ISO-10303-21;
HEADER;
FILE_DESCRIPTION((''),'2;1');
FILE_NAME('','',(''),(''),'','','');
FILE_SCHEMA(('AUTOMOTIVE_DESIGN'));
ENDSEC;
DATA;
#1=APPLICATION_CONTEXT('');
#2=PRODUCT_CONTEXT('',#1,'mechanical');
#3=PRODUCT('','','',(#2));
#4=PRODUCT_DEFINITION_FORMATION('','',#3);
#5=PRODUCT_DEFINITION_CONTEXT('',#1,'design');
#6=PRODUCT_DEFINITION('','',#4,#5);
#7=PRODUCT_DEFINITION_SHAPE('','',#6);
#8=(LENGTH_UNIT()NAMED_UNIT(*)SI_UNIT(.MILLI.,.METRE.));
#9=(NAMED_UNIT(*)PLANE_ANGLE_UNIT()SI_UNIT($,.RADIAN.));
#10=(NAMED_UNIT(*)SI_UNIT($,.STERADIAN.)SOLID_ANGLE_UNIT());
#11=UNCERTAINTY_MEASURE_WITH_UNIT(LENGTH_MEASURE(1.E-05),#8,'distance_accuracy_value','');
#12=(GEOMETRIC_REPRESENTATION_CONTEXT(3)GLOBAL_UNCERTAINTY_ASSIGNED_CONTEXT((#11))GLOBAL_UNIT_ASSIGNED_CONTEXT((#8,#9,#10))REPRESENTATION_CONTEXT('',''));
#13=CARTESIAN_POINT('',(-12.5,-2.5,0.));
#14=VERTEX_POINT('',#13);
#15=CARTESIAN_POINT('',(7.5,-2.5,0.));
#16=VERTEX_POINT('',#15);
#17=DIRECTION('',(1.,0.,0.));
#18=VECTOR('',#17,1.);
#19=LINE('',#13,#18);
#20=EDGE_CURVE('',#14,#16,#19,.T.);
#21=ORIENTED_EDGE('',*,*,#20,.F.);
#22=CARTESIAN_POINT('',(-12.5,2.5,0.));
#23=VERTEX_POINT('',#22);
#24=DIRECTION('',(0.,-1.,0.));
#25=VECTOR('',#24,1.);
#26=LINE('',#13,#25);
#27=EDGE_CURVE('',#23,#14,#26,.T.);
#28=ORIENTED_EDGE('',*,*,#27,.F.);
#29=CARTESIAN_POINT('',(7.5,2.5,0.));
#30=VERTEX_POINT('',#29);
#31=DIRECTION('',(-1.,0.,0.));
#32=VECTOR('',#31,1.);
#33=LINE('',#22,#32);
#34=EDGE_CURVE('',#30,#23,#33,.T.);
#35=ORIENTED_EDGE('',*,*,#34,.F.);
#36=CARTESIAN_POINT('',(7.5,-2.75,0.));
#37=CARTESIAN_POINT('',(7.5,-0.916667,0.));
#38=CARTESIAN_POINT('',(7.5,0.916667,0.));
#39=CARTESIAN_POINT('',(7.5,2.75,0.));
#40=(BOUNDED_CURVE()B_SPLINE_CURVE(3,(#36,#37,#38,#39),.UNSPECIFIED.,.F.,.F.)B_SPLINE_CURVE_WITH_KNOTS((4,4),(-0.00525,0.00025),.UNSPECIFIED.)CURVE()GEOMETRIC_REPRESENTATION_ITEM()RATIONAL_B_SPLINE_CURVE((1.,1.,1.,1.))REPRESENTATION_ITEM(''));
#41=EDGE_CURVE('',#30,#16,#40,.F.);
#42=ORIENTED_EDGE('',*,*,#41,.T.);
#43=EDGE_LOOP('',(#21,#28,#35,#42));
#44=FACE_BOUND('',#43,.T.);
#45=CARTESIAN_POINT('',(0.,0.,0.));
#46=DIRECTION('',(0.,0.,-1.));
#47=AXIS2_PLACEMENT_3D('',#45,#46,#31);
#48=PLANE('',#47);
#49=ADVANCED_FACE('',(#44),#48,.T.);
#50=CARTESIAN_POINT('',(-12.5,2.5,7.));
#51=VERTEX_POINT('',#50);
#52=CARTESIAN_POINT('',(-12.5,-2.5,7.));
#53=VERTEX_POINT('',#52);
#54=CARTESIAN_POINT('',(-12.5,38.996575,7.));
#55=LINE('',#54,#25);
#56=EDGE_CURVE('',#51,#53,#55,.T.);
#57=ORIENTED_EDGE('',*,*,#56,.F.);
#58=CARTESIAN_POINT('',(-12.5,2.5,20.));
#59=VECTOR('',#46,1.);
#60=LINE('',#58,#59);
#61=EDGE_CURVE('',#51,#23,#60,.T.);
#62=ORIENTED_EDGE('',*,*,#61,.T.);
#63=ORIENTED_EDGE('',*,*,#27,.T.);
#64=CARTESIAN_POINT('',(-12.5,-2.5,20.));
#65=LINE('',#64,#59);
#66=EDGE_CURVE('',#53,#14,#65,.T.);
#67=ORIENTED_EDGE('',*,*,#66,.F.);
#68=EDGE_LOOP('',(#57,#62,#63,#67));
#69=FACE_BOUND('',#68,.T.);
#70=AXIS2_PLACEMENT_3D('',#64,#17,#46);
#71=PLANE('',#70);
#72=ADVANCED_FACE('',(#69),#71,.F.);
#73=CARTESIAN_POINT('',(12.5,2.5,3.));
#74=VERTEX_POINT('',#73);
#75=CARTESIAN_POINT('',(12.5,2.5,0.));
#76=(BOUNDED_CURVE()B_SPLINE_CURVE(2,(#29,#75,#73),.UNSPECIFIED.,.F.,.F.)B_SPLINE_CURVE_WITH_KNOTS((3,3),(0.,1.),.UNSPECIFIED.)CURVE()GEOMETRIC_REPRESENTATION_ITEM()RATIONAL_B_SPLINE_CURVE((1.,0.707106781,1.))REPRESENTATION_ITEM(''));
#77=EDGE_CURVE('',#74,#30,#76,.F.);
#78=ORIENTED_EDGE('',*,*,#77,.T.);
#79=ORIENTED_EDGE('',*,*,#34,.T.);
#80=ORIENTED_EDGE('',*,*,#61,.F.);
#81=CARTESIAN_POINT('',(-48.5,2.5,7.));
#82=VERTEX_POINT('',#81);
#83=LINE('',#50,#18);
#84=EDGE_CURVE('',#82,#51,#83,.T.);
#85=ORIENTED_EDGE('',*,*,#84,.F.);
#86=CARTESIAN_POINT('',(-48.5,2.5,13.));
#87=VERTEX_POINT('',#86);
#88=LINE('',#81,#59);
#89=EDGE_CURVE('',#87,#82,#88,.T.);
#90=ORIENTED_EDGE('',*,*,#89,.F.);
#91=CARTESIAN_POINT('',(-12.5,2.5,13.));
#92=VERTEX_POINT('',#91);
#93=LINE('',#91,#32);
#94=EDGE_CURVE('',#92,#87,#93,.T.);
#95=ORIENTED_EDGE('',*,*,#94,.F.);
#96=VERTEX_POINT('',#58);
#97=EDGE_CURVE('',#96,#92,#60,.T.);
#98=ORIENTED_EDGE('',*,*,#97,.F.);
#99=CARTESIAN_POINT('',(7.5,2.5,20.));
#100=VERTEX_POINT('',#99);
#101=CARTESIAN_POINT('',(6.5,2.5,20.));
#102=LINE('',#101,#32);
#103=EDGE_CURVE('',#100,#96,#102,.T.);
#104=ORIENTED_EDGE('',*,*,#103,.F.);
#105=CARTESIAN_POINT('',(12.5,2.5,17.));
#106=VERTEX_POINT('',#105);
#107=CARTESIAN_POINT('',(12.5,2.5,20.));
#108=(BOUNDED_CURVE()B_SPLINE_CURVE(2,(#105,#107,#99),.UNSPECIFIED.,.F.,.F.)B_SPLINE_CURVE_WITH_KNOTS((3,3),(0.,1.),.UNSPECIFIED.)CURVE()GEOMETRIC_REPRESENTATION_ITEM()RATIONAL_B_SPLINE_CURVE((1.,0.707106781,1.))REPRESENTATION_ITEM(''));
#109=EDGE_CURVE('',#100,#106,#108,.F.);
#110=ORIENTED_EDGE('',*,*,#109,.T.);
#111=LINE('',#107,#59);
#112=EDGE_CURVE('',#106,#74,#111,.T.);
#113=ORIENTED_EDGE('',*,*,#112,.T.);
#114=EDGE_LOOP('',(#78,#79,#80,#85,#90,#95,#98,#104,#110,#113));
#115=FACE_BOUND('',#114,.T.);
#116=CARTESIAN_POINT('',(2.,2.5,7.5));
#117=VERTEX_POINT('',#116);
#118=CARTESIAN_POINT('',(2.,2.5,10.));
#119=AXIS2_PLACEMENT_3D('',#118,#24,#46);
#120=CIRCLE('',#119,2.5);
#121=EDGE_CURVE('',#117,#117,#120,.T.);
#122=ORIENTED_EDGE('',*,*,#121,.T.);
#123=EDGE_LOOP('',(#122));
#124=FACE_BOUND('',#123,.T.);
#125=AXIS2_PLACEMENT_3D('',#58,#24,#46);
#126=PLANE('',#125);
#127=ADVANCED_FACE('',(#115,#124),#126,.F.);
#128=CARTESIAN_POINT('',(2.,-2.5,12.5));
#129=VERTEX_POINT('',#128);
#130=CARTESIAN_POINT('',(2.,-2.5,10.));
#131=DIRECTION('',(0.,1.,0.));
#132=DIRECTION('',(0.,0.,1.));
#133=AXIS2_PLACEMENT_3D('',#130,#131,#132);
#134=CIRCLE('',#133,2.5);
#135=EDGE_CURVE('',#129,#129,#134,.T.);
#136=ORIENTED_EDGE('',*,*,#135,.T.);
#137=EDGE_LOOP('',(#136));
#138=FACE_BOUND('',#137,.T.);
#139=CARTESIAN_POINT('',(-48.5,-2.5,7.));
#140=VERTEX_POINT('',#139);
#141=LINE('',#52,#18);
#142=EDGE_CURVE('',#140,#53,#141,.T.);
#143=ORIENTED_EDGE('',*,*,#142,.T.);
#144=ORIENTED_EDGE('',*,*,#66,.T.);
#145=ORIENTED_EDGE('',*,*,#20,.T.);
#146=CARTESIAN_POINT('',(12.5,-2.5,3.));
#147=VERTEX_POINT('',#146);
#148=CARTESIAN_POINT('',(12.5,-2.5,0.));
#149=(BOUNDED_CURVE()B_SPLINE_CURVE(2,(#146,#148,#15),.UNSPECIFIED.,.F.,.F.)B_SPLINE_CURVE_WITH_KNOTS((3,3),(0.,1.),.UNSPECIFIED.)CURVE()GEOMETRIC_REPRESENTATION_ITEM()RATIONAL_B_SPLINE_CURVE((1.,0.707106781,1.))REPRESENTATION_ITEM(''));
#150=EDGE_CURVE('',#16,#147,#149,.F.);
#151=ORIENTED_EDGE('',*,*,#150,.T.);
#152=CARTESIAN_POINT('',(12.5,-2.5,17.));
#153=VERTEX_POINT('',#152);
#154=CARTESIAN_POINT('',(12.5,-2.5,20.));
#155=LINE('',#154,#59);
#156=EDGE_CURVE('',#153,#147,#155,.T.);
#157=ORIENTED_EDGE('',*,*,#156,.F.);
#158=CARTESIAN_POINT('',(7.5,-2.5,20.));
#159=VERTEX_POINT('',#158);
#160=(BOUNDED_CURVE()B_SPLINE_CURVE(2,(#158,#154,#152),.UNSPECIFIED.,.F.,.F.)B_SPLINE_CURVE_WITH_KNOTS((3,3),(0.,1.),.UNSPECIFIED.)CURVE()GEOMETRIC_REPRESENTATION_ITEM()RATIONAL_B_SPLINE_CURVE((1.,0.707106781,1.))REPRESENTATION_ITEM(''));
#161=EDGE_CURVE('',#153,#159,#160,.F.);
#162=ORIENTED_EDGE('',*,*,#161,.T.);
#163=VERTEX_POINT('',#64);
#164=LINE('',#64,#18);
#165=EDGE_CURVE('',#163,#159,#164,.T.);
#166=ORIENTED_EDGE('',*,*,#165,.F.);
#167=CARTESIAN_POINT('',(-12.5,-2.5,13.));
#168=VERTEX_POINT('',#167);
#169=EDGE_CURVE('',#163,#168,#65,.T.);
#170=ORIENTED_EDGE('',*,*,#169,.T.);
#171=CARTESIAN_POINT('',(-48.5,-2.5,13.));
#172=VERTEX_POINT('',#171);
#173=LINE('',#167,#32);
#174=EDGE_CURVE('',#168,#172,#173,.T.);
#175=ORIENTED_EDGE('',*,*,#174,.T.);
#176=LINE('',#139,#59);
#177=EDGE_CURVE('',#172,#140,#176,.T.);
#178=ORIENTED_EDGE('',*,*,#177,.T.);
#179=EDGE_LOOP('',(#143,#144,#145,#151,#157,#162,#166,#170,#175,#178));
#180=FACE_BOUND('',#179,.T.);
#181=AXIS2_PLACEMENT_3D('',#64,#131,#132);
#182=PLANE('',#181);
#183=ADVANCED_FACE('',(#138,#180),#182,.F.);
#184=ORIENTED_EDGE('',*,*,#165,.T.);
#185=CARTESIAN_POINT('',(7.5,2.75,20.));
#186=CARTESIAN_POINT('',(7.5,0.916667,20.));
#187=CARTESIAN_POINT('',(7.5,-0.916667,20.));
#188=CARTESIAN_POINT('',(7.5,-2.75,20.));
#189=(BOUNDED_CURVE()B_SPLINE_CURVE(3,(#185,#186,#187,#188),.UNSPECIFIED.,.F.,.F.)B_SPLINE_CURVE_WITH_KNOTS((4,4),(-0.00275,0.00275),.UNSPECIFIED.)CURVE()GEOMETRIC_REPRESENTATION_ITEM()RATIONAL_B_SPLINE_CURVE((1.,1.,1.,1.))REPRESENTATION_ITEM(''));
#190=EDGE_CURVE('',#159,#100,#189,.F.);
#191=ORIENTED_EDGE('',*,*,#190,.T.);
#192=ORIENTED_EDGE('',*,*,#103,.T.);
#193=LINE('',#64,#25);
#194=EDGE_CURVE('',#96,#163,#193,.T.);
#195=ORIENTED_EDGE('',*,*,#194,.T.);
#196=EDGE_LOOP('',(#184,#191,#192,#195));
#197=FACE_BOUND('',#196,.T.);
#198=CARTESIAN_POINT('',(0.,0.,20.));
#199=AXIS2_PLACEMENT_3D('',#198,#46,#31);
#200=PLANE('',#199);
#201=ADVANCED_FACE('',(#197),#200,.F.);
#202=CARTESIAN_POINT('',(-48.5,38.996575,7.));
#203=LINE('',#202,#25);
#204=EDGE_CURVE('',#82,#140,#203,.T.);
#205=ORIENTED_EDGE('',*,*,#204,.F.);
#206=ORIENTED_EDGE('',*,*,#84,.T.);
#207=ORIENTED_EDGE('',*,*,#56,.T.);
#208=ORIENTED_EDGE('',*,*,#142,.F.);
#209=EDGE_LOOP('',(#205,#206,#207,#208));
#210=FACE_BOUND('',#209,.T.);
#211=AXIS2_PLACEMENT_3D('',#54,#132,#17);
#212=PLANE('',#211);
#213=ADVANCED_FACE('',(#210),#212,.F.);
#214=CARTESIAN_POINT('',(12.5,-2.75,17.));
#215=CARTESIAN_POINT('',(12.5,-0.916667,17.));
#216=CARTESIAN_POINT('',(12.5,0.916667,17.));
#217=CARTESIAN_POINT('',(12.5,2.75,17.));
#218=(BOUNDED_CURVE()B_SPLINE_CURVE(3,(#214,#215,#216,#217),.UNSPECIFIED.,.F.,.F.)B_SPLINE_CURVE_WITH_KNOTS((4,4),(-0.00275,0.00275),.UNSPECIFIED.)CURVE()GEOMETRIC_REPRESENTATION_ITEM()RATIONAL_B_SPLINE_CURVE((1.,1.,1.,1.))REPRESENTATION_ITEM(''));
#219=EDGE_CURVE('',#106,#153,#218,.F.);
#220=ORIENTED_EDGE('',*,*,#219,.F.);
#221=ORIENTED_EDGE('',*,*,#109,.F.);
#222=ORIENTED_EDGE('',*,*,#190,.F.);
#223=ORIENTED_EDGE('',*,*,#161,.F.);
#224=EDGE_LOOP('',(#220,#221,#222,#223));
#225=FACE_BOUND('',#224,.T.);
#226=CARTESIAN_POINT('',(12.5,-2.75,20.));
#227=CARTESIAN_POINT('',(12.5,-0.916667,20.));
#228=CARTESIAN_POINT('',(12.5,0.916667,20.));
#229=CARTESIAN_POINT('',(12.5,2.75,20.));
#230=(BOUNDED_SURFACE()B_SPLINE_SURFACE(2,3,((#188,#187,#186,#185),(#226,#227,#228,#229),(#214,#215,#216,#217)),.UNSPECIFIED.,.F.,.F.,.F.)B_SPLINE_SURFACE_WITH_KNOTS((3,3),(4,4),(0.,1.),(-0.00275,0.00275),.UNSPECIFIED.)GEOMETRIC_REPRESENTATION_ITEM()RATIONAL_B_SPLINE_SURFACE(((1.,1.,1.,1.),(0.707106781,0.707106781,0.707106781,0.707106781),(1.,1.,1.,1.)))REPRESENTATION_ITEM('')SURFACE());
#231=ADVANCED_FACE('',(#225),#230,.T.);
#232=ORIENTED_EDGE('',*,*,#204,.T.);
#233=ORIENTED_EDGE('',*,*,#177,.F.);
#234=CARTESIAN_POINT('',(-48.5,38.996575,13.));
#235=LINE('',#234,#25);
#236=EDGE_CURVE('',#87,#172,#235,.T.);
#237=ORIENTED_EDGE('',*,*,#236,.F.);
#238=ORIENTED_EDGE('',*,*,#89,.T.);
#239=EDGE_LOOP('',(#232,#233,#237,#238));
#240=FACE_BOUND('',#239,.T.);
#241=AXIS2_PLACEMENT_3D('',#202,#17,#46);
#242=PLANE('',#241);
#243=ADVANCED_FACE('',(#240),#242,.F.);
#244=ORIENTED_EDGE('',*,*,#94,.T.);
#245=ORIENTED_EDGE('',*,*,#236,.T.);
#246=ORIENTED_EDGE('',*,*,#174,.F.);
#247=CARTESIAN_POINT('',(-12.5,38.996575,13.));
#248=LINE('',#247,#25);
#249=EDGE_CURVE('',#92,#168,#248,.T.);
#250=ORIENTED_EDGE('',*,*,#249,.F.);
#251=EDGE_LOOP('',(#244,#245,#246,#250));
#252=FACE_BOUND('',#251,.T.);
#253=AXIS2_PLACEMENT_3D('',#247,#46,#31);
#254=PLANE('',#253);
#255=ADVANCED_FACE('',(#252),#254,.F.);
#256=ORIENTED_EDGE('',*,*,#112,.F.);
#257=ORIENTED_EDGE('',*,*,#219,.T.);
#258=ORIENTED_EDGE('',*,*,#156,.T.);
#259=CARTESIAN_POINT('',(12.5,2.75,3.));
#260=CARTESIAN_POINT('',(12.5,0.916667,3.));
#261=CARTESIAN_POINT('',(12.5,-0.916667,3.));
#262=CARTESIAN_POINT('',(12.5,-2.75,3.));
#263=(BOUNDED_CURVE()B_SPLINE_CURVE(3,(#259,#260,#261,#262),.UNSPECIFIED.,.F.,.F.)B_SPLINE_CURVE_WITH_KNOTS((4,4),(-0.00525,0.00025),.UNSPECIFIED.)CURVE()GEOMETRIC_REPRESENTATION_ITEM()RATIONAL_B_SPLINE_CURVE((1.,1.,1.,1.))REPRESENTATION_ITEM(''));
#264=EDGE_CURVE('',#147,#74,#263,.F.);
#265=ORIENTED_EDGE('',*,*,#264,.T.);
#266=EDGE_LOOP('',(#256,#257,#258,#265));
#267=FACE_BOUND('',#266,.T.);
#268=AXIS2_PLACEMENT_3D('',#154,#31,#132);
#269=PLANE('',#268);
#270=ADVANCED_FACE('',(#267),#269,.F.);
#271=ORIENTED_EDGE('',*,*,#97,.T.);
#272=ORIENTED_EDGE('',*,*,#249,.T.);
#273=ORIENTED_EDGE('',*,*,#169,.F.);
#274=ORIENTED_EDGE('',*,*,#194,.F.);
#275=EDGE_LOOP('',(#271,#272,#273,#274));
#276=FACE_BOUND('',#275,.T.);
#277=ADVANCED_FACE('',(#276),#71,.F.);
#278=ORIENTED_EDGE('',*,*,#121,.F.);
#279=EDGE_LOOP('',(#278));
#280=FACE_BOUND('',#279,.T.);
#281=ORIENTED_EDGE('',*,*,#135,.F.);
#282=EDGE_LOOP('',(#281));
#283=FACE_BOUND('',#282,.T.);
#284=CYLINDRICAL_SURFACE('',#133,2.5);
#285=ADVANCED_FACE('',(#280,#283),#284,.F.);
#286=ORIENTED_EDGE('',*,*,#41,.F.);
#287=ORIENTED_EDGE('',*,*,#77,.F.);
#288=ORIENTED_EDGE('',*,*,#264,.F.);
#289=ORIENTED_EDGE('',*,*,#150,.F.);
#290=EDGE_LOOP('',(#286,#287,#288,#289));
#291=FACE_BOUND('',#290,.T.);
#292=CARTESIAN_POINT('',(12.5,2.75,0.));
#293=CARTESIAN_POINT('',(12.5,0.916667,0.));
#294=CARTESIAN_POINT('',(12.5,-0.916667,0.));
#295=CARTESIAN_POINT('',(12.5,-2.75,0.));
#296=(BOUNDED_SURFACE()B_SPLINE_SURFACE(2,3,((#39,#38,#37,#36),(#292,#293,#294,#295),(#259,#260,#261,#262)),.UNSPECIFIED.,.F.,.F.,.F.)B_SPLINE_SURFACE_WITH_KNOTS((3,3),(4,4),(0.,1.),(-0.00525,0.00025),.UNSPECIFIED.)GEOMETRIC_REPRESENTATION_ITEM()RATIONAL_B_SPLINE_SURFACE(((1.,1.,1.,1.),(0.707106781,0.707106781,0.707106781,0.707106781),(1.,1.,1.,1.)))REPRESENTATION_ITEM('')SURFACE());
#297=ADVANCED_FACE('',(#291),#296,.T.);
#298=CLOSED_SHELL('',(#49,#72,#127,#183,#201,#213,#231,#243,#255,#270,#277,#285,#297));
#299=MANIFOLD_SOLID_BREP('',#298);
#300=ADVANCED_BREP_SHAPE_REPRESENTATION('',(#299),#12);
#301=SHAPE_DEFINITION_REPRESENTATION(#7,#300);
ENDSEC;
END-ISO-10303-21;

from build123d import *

# Parameters (mm, degrees)
BOSS_EXTRUDE1_DEPTH             = 20
CUT_EXTRUDE2_DEPTH              = 25.109126902
CUT_EXTRUDE2_DEPTH_BACK         = 25.109126902
SKETCH2_R                       = 2.5
FILLET1_SIZE                    = 3
FILLET1_SIZE_2                  = 5
BOSS_EXTRUDE2_REACH             = 25.717
SKETCH3_W                       = 36
SKETCH3_H                       = 6
BOSS_EXTRUDE2_DIRECTION_2_REACH = 25.717


with BuildPart() as part:
    # Sketch1 → Boss-Extrude1 (new body)
    with BuildSketch(Plane.XY):
        Polygon((6.5, 2.5), (12.5, 2.5), (12.5, -2.5), (-12.5, -2.5), (-12.5, 2.5), align=None)
    extrude(amount=BOSS_EXTRUDE1_DEPTH)

    # Sketch2 → Cut-Extrude2 (cut, two sides: drawn at the far end of the back side and taken through both)
    with BuildSketch(Plane(origin=(0, 2.5, 0), x_dir=(1, 0, 0), z_dir=(0, 1, 0)).offset(-CUT_EXTRUDE2_DEPTH_BACK)):
        with Locations(Location((2, -10, 0), (0, 0, 270))):
            Circle(SKETCH2_R)
    extrude(amount=CUT_EXTRUDE2_DEPTH + CUT_EXTRUDE2_DEPTH_BACK, mode=Mode.SUBTRACT)

    # Fillet1
    # an asymmetric fillet: 5, 3 mm, written as the material it takes off along each edge
    with BuildSketch(Plane(origin=(12.5, 15, 20), x_dir=(0, 0, -1), z_dir=(0, -1, 0))) as fillet1_piece_1:
        with BuildLine():
            Bezier((FILLET1_SIZE, 0), (0, 0), (0, -FILLET1_SIZE_2), weights=[1, 0.707106781, 1])
            Line((0, -FILLET1_SIZE_2), (0, 0))
            Line((0, 0), (FILLET1_SIZE, 0))
        make_face()
    extrude(amount=30, mode=Mode.SUBTRACT)
    with BuildSketch(Plane(origin=(12.5, 15, 0), x_dir=(0, 0, 1), z_dir=(0, -1, 0))) as fillet1_piece_2:
        with BuildLine():
            Bezier((FILLET1_SIZE, 0), (0, 0), (0, FILLET1_SIZE_2), weights=[1, 0.707106781, 1])
            Line((0, FILLET1_SIZE_2), (0, 0))
            Line((0, 0), (FILLET1_SIZE, 0))
        make_face()
    extrude(amount=30, mode=Mode.SUBTRACT)

    # Boss-Extrude2: up to this face of the body (flat: up to its plane)
    boss_extrude2_end = Plane(part.part.faces().sort_by_distance((12.179843785, 2.5, 10))[0])
    # Sketch3 → Boss-Extrude2 (add, up to the picked face)
    with BuildSketch(Plane(origin=(0, 0, 0), x_dir=(1, 0, 0), z_dir=(0, 1, 0)), mode=Mode.PRIVATE) as boss_extrude2_sk1:
        with Locations((-30.5, -10)):
            Rectangle(SKETCH3_W, SKETCH3_H)
    boss_extrude2_tool1 = split(extrude(boss_extrude2_sk1.sketch, amount=BOSS_EXTRUDE2_REACH, mode=Mode.PRIVATE), bisect_by=boss_extrude2_end, keep=Keep.BOTH, mode=Mode.PRIVATE)
    add(boss_extrude2_tool1.solids().sort_by(Axis((-30.5, 0, 10), (0, 1, 0)))[0])

    # Boss-Extrude2 direction 2: up to this face of the body (flat: up to its plane)
    boss_extrude2_direction_2_end = Plane(part.part.faces().sort_by_distance((-2.5, -2.5, 0.320156215))[0])
    # Sketch3 → Boss-Extrude2 direction 2 (add, up to the picked face)
    with BuildSketch(Plane(origin=(0, 0, 0), x_dir=(1, 0, 0), z_dir=(0, 1, 0)), mode=Mode.PRIVATE) as boss_extrude2_direction_2_sk1:
        with Locations((-30.5, -10)):
            Rectangle(SKETCH3_W, SKETCH3_H)
    boss_extrude2_direction_2_tool1 = split(extrude(boss_extrude2_direction_2_sk1.sketch, amount=-BOSS_EXTRUDE2_DIRECTION_2_REACH, mode=Mode.PRIVATE), bisect_by=boss_extrude2_direction_2_end, keep=Keep.BOTH, mode=Mode.PRIVATE)
    add(boss_extrude2_direction_2_tool1.solids().sort_by(Axis((-30.5, 0, 10), (0, -1, 0)))[0])


solid = part.part
